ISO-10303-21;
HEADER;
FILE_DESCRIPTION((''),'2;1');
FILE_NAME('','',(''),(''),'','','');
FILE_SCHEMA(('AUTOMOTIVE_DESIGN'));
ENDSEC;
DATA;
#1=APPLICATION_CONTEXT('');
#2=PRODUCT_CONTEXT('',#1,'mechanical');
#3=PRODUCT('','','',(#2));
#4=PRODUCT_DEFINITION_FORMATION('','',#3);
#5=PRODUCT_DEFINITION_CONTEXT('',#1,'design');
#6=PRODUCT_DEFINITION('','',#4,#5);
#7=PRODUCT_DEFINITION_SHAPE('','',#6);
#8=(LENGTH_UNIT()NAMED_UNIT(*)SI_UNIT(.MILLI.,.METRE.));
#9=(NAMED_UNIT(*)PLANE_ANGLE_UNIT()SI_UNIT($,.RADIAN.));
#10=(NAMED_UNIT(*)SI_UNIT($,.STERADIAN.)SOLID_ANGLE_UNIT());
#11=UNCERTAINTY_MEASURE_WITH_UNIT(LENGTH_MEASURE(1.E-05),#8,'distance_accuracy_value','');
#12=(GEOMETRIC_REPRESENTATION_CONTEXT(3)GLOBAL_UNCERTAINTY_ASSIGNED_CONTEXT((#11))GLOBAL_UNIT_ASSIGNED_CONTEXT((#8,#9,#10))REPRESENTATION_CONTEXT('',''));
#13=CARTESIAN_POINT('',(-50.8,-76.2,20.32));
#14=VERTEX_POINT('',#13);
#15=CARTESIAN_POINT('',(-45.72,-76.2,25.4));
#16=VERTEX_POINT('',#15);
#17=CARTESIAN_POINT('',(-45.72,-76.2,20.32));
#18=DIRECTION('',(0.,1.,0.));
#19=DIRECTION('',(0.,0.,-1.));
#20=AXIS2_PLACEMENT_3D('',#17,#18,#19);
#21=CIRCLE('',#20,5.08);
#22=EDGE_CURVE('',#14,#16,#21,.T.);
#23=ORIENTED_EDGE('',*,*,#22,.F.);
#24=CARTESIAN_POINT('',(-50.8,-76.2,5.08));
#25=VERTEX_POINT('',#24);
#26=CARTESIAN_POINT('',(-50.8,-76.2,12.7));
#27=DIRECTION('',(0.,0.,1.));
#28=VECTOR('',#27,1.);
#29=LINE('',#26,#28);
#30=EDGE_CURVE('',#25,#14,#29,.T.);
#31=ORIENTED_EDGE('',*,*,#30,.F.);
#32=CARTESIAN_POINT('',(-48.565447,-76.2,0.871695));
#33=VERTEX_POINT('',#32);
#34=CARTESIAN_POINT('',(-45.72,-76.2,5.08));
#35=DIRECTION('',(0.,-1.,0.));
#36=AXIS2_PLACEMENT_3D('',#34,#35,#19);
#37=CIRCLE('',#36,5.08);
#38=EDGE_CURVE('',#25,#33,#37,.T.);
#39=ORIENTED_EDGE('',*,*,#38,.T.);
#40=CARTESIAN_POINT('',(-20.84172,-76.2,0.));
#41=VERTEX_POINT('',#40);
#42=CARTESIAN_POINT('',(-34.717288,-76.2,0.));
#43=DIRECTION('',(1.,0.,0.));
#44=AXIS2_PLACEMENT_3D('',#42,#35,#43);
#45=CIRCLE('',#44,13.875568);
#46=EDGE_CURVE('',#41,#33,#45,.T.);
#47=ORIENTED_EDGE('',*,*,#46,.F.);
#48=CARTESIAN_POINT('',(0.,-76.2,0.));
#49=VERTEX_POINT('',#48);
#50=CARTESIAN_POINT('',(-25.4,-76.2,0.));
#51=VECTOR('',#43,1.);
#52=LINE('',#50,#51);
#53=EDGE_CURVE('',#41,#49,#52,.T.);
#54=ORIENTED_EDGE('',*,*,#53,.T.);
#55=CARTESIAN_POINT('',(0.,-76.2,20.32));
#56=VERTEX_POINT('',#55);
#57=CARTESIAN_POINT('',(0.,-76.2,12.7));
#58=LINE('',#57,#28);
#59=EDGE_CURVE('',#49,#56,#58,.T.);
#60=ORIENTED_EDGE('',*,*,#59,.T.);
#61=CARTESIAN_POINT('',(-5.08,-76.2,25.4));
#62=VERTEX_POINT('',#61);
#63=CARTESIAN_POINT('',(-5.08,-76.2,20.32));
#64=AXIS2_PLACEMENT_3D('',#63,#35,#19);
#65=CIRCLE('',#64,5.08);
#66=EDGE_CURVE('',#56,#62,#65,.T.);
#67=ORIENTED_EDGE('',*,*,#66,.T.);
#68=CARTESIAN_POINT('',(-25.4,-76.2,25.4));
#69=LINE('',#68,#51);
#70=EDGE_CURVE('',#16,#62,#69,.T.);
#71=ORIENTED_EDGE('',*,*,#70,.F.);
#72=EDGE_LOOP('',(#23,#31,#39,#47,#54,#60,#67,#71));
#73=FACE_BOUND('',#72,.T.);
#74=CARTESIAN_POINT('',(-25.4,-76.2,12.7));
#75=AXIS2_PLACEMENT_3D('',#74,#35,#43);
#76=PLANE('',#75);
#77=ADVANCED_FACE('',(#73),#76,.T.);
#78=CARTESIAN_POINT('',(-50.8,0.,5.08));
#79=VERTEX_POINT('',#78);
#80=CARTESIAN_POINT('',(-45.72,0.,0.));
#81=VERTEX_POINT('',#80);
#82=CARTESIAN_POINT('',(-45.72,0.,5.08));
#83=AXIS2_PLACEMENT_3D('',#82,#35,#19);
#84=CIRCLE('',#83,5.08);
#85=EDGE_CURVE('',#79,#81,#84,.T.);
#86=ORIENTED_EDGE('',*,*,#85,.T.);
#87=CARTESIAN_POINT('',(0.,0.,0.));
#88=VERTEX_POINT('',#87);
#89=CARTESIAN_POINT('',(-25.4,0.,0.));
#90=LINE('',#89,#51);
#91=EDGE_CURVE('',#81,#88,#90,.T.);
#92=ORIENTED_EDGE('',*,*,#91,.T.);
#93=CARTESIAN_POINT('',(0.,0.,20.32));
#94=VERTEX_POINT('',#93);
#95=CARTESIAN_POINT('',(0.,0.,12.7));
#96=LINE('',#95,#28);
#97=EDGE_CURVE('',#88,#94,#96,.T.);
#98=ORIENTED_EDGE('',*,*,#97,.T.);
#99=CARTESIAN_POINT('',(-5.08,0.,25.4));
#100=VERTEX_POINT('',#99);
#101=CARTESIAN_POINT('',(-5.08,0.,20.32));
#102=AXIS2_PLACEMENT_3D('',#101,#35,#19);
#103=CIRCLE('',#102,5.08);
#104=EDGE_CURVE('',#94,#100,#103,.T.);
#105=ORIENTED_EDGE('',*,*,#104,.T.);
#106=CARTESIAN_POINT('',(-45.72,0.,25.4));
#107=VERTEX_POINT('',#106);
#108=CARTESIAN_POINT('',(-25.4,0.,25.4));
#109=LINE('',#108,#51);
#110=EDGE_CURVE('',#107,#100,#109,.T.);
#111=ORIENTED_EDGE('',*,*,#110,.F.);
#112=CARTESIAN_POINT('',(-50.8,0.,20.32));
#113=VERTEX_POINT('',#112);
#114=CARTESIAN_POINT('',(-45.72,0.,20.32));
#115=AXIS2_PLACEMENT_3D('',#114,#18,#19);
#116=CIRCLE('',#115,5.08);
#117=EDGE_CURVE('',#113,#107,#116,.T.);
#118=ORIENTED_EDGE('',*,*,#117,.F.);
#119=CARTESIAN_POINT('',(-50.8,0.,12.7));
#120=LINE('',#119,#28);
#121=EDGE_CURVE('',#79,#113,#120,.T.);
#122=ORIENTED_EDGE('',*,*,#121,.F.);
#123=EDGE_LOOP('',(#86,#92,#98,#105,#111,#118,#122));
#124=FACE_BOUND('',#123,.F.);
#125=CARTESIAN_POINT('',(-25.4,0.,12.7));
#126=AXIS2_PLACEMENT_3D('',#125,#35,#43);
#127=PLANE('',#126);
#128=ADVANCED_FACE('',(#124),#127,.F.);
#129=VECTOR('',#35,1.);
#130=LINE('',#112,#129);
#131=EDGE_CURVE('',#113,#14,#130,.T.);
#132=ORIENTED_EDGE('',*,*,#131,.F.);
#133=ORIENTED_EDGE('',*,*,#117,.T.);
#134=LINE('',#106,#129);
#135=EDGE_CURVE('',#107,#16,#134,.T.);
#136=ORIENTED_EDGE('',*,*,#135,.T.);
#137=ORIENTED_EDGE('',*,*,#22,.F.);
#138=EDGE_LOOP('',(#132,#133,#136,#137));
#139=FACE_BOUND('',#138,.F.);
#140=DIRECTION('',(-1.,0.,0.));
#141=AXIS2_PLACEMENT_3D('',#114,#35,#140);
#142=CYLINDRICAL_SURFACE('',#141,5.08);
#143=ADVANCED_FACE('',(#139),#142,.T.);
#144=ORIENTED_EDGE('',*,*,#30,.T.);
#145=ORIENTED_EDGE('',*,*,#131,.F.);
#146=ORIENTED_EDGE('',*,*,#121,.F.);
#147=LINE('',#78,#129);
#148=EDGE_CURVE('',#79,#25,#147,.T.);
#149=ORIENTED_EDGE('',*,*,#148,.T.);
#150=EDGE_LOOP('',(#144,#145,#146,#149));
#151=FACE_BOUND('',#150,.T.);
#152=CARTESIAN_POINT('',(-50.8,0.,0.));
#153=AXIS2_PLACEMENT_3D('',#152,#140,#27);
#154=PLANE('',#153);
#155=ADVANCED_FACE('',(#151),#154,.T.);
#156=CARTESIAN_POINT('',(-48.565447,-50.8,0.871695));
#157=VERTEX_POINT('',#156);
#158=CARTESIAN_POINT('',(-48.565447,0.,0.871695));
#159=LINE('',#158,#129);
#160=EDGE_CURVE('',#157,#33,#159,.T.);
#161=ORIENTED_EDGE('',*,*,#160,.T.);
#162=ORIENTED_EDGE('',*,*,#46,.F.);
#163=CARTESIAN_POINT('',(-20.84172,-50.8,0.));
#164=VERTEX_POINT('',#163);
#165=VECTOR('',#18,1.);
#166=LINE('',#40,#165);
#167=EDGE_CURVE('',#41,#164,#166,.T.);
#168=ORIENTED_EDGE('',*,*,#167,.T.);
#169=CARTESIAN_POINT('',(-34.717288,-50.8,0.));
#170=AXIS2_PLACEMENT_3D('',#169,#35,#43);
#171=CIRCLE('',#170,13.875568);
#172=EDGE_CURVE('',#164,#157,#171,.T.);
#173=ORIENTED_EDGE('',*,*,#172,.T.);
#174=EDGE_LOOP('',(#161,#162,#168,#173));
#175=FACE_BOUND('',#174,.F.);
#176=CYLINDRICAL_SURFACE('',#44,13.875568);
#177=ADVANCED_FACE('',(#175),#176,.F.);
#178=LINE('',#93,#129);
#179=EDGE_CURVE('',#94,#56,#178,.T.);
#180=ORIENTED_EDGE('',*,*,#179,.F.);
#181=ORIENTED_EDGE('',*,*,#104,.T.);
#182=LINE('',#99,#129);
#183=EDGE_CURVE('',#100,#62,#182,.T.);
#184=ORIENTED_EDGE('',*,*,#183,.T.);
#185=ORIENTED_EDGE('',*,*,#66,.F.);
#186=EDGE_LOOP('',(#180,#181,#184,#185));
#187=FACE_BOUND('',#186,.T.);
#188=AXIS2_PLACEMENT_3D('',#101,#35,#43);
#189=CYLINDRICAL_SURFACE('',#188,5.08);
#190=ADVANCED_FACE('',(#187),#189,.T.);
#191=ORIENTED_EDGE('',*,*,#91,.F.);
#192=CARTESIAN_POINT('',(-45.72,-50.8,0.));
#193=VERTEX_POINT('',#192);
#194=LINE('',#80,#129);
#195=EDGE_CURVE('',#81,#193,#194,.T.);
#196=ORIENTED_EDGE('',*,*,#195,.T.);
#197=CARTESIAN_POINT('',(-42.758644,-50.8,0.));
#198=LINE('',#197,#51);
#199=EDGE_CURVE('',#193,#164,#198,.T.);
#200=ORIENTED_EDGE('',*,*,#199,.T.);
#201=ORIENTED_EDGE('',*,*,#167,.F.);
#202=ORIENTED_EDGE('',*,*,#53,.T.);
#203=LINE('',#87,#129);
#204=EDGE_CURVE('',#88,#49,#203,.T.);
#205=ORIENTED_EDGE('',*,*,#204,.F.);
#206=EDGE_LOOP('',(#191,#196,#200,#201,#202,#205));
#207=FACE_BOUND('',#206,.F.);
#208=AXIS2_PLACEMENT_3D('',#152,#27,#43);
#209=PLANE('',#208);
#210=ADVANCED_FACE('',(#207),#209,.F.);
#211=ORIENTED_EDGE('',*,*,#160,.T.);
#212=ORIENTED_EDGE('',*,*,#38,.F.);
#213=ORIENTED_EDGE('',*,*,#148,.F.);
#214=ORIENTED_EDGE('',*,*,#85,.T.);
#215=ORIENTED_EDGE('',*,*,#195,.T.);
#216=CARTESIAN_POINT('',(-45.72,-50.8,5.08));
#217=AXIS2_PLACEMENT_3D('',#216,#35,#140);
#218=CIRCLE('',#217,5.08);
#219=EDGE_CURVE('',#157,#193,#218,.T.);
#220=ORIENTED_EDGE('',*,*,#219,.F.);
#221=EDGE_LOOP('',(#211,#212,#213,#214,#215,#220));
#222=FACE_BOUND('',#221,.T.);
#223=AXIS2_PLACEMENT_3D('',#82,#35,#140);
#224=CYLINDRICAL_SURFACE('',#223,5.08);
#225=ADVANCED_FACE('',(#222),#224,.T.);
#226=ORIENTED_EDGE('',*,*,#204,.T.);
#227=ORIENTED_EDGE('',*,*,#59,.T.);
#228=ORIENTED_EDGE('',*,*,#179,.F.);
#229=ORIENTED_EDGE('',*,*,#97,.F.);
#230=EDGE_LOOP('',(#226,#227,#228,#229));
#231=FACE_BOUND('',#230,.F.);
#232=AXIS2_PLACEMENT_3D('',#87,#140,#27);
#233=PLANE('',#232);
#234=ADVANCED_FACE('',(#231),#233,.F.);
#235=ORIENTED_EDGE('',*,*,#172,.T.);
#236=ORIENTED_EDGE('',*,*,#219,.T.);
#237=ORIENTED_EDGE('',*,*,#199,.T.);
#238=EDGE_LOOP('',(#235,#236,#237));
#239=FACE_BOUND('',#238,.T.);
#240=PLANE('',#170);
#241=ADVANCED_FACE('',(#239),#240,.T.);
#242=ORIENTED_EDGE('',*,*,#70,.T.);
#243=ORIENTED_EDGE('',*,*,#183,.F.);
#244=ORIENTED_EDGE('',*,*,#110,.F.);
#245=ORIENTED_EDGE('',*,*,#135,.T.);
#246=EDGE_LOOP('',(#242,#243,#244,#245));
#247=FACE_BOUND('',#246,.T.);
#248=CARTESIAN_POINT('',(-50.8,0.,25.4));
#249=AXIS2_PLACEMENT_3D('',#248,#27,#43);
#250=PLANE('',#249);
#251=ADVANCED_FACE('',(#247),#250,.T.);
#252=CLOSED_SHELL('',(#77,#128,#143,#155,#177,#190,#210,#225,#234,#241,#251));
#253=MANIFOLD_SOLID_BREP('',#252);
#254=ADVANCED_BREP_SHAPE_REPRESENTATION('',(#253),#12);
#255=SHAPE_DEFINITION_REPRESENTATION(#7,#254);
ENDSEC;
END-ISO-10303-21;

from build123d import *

# Parameters (mm, degrees)
F1_E0_TOP_W = 50.8
F1_E0_TOP_H = 25.4
F2_DEPTH    = 76.2
F3_R        = 5.08
F4_R        = 13.875567501
F5_DEPTH    = 25.4


with BuildPart() as f2:
    # F1_E0_top (on explicit) → F2 (new body)
    with BuildSketch(Plane(origin=(-50.8, 0, 0), x_dir=(1, 0, 0), z_dir=(0, -1, 0))):
        with Locations((25.4, 12.7)):
            Rectangle(F1_E0_TOP_W, F1_E0_TOP_H)
    extrude(amount=F2_DEPTH)

    # F3
    f3_edges = [f2.edges().sort_by_distance(p)[0] for p in [
        (-50.8, -38.1, 0),
        (-50.8, -38.1, 25.4),
        (0, -38.1, 25.4),
    ]]
    fillet(f3_edges, radius=F3_R)

    # F4 (on face) → F5 (cut)
    with BuildSketch(Plane.XZ.offset(76.2)):
        with Locations((-34.7172878683, 0)):
            Circle(F4_R)
    extrude(amount=-F5_DEPTH, mode=Mode.SUBTRACT)


solid = f2.part
